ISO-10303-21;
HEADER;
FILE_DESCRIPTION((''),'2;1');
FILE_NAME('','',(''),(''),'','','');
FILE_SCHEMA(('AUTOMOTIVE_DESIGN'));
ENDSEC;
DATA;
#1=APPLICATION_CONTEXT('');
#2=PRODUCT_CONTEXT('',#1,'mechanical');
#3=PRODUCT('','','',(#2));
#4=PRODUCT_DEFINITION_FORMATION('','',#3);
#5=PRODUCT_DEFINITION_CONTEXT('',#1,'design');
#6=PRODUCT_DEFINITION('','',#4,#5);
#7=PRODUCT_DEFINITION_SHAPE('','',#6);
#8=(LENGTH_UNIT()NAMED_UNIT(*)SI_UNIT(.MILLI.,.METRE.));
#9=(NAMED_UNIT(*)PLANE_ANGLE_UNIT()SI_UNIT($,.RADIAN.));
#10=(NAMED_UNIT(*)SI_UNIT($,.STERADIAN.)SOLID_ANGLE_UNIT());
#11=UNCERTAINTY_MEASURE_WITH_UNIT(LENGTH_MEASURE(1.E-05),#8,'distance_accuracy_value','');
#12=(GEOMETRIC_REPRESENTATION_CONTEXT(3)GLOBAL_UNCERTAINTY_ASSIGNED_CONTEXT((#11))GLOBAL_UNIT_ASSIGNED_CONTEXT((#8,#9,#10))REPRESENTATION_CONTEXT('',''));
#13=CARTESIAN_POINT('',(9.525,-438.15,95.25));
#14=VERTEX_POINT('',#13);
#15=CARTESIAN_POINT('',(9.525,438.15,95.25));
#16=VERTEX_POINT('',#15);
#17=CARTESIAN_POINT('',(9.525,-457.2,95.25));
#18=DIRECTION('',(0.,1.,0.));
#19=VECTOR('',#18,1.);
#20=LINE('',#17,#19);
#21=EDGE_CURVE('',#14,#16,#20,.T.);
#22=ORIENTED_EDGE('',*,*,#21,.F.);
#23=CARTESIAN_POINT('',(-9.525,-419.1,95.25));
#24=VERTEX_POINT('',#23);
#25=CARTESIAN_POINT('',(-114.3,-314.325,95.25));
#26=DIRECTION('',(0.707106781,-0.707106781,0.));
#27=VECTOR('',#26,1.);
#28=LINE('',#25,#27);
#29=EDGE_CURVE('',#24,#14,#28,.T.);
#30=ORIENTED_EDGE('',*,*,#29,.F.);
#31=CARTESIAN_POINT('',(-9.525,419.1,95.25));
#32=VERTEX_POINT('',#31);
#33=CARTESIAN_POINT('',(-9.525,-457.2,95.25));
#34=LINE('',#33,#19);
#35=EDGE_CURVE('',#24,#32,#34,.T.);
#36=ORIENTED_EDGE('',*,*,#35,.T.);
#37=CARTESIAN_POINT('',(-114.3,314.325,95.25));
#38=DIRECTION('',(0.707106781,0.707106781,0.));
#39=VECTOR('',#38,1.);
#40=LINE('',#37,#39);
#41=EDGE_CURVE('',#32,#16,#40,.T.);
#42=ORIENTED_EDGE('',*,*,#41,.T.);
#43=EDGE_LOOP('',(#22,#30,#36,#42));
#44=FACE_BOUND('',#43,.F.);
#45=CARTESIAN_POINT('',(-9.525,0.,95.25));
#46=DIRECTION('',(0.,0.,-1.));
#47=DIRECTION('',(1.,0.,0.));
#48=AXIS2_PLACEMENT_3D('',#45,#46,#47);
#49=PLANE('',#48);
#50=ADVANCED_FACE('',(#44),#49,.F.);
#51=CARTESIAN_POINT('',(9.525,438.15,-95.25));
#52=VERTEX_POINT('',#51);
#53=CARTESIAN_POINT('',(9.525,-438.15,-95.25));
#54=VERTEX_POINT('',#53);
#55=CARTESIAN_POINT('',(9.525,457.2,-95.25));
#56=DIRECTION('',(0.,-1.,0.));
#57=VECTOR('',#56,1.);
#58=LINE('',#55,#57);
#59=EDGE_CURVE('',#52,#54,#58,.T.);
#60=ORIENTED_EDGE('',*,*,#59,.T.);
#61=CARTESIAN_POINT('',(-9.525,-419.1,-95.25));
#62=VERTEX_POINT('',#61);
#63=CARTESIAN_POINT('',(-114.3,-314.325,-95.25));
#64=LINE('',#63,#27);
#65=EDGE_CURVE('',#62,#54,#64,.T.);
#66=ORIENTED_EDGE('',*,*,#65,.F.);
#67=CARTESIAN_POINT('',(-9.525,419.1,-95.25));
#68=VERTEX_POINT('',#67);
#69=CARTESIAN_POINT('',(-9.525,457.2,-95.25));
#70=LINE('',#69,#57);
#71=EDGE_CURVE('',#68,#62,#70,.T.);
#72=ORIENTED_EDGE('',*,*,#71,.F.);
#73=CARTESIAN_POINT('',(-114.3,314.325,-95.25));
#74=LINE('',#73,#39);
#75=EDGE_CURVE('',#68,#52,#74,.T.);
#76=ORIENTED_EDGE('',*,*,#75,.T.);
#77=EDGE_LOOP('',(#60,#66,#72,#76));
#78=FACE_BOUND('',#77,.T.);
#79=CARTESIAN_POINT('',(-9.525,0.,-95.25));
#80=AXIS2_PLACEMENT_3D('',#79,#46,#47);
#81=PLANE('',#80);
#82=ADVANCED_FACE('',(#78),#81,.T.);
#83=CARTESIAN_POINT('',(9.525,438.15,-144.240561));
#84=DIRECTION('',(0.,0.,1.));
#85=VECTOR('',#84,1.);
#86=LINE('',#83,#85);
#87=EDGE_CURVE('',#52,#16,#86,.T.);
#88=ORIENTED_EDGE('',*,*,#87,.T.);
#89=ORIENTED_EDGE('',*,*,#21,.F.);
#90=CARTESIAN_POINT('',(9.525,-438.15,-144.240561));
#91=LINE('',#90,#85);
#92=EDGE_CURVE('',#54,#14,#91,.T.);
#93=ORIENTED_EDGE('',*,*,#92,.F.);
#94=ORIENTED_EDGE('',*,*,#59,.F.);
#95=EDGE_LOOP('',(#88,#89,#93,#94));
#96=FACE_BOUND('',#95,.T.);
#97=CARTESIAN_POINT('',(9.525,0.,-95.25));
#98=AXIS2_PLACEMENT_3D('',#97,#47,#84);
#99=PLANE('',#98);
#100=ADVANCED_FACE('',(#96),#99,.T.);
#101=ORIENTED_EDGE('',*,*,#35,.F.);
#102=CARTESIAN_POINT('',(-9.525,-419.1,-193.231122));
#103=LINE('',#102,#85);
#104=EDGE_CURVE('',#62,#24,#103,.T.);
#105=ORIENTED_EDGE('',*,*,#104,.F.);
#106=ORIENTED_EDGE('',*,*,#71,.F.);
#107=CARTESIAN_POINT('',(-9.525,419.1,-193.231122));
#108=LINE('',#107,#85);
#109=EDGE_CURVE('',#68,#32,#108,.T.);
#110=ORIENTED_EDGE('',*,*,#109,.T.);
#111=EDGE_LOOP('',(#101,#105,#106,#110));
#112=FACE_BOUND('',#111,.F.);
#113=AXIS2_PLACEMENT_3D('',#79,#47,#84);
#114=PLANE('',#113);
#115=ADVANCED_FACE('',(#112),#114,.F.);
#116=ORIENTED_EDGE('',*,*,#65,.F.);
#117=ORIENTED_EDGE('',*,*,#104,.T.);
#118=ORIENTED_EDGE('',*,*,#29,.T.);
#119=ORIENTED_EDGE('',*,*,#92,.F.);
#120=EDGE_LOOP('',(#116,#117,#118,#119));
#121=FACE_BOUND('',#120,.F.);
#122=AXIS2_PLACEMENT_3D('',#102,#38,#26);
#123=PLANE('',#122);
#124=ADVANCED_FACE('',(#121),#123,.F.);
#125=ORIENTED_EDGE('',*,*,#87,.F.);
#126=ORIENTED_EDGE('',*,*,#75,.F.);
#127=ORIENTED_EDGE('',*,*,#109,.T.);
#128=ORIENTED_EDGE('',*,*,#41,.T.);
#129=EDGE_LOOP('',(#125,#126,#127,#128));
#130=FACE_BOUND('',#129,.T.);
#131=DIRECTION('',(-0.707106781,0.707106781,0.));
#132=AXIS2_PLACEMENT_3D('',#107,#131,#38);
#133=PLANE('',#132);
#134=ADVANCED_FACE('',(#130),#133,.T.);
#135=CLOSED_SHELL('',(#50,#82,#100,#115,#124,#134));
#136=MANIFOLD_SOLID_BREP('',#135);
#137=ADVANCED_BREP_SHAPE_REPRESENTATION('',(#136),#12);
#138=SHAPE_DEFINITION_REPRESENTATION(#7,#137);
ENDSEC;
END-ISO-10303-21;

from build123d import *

# Parameters (mm, degrees)
F0_W        = 19.05
F0_H        = 190.5
F1_DEPTH    = 457.2
F2_T1_DEPTH = 386.462243683


# Not quite as in the source:
# - a fillet or chamfer that OpenCascade refuses, or shapes differently, is made with other operations: its cross-section is extruded or revolved along the edge and cut away or added


with BuildPart() as f1:
    # F0 (on Front) → F1 (new body, symmetric)
    with BuildSketch(Plane.XZ):
        Rectangle(F0_W, F0_H)
    extrude(amount=F1_DEPTH, both=True)

    # F2: chamfer of 38.1 on 2 edges, made by hand

    # F2_s2 → F2_t1 (cut)
    with BuildSketch(Plane.XY.offset(-193.2311218415)):
        Polygon((-9.525, 419.1), (28.575, 457.2), (-9.525, 457.2), align=None)
        Polygon((-9.525, -419.1), (28.575, -457.2), (-9.525, -457.2), align=None)
    extrude(amount=F2_T1_DEPTH, mode=Mode.SUBTRACT)


solid = f1.part
